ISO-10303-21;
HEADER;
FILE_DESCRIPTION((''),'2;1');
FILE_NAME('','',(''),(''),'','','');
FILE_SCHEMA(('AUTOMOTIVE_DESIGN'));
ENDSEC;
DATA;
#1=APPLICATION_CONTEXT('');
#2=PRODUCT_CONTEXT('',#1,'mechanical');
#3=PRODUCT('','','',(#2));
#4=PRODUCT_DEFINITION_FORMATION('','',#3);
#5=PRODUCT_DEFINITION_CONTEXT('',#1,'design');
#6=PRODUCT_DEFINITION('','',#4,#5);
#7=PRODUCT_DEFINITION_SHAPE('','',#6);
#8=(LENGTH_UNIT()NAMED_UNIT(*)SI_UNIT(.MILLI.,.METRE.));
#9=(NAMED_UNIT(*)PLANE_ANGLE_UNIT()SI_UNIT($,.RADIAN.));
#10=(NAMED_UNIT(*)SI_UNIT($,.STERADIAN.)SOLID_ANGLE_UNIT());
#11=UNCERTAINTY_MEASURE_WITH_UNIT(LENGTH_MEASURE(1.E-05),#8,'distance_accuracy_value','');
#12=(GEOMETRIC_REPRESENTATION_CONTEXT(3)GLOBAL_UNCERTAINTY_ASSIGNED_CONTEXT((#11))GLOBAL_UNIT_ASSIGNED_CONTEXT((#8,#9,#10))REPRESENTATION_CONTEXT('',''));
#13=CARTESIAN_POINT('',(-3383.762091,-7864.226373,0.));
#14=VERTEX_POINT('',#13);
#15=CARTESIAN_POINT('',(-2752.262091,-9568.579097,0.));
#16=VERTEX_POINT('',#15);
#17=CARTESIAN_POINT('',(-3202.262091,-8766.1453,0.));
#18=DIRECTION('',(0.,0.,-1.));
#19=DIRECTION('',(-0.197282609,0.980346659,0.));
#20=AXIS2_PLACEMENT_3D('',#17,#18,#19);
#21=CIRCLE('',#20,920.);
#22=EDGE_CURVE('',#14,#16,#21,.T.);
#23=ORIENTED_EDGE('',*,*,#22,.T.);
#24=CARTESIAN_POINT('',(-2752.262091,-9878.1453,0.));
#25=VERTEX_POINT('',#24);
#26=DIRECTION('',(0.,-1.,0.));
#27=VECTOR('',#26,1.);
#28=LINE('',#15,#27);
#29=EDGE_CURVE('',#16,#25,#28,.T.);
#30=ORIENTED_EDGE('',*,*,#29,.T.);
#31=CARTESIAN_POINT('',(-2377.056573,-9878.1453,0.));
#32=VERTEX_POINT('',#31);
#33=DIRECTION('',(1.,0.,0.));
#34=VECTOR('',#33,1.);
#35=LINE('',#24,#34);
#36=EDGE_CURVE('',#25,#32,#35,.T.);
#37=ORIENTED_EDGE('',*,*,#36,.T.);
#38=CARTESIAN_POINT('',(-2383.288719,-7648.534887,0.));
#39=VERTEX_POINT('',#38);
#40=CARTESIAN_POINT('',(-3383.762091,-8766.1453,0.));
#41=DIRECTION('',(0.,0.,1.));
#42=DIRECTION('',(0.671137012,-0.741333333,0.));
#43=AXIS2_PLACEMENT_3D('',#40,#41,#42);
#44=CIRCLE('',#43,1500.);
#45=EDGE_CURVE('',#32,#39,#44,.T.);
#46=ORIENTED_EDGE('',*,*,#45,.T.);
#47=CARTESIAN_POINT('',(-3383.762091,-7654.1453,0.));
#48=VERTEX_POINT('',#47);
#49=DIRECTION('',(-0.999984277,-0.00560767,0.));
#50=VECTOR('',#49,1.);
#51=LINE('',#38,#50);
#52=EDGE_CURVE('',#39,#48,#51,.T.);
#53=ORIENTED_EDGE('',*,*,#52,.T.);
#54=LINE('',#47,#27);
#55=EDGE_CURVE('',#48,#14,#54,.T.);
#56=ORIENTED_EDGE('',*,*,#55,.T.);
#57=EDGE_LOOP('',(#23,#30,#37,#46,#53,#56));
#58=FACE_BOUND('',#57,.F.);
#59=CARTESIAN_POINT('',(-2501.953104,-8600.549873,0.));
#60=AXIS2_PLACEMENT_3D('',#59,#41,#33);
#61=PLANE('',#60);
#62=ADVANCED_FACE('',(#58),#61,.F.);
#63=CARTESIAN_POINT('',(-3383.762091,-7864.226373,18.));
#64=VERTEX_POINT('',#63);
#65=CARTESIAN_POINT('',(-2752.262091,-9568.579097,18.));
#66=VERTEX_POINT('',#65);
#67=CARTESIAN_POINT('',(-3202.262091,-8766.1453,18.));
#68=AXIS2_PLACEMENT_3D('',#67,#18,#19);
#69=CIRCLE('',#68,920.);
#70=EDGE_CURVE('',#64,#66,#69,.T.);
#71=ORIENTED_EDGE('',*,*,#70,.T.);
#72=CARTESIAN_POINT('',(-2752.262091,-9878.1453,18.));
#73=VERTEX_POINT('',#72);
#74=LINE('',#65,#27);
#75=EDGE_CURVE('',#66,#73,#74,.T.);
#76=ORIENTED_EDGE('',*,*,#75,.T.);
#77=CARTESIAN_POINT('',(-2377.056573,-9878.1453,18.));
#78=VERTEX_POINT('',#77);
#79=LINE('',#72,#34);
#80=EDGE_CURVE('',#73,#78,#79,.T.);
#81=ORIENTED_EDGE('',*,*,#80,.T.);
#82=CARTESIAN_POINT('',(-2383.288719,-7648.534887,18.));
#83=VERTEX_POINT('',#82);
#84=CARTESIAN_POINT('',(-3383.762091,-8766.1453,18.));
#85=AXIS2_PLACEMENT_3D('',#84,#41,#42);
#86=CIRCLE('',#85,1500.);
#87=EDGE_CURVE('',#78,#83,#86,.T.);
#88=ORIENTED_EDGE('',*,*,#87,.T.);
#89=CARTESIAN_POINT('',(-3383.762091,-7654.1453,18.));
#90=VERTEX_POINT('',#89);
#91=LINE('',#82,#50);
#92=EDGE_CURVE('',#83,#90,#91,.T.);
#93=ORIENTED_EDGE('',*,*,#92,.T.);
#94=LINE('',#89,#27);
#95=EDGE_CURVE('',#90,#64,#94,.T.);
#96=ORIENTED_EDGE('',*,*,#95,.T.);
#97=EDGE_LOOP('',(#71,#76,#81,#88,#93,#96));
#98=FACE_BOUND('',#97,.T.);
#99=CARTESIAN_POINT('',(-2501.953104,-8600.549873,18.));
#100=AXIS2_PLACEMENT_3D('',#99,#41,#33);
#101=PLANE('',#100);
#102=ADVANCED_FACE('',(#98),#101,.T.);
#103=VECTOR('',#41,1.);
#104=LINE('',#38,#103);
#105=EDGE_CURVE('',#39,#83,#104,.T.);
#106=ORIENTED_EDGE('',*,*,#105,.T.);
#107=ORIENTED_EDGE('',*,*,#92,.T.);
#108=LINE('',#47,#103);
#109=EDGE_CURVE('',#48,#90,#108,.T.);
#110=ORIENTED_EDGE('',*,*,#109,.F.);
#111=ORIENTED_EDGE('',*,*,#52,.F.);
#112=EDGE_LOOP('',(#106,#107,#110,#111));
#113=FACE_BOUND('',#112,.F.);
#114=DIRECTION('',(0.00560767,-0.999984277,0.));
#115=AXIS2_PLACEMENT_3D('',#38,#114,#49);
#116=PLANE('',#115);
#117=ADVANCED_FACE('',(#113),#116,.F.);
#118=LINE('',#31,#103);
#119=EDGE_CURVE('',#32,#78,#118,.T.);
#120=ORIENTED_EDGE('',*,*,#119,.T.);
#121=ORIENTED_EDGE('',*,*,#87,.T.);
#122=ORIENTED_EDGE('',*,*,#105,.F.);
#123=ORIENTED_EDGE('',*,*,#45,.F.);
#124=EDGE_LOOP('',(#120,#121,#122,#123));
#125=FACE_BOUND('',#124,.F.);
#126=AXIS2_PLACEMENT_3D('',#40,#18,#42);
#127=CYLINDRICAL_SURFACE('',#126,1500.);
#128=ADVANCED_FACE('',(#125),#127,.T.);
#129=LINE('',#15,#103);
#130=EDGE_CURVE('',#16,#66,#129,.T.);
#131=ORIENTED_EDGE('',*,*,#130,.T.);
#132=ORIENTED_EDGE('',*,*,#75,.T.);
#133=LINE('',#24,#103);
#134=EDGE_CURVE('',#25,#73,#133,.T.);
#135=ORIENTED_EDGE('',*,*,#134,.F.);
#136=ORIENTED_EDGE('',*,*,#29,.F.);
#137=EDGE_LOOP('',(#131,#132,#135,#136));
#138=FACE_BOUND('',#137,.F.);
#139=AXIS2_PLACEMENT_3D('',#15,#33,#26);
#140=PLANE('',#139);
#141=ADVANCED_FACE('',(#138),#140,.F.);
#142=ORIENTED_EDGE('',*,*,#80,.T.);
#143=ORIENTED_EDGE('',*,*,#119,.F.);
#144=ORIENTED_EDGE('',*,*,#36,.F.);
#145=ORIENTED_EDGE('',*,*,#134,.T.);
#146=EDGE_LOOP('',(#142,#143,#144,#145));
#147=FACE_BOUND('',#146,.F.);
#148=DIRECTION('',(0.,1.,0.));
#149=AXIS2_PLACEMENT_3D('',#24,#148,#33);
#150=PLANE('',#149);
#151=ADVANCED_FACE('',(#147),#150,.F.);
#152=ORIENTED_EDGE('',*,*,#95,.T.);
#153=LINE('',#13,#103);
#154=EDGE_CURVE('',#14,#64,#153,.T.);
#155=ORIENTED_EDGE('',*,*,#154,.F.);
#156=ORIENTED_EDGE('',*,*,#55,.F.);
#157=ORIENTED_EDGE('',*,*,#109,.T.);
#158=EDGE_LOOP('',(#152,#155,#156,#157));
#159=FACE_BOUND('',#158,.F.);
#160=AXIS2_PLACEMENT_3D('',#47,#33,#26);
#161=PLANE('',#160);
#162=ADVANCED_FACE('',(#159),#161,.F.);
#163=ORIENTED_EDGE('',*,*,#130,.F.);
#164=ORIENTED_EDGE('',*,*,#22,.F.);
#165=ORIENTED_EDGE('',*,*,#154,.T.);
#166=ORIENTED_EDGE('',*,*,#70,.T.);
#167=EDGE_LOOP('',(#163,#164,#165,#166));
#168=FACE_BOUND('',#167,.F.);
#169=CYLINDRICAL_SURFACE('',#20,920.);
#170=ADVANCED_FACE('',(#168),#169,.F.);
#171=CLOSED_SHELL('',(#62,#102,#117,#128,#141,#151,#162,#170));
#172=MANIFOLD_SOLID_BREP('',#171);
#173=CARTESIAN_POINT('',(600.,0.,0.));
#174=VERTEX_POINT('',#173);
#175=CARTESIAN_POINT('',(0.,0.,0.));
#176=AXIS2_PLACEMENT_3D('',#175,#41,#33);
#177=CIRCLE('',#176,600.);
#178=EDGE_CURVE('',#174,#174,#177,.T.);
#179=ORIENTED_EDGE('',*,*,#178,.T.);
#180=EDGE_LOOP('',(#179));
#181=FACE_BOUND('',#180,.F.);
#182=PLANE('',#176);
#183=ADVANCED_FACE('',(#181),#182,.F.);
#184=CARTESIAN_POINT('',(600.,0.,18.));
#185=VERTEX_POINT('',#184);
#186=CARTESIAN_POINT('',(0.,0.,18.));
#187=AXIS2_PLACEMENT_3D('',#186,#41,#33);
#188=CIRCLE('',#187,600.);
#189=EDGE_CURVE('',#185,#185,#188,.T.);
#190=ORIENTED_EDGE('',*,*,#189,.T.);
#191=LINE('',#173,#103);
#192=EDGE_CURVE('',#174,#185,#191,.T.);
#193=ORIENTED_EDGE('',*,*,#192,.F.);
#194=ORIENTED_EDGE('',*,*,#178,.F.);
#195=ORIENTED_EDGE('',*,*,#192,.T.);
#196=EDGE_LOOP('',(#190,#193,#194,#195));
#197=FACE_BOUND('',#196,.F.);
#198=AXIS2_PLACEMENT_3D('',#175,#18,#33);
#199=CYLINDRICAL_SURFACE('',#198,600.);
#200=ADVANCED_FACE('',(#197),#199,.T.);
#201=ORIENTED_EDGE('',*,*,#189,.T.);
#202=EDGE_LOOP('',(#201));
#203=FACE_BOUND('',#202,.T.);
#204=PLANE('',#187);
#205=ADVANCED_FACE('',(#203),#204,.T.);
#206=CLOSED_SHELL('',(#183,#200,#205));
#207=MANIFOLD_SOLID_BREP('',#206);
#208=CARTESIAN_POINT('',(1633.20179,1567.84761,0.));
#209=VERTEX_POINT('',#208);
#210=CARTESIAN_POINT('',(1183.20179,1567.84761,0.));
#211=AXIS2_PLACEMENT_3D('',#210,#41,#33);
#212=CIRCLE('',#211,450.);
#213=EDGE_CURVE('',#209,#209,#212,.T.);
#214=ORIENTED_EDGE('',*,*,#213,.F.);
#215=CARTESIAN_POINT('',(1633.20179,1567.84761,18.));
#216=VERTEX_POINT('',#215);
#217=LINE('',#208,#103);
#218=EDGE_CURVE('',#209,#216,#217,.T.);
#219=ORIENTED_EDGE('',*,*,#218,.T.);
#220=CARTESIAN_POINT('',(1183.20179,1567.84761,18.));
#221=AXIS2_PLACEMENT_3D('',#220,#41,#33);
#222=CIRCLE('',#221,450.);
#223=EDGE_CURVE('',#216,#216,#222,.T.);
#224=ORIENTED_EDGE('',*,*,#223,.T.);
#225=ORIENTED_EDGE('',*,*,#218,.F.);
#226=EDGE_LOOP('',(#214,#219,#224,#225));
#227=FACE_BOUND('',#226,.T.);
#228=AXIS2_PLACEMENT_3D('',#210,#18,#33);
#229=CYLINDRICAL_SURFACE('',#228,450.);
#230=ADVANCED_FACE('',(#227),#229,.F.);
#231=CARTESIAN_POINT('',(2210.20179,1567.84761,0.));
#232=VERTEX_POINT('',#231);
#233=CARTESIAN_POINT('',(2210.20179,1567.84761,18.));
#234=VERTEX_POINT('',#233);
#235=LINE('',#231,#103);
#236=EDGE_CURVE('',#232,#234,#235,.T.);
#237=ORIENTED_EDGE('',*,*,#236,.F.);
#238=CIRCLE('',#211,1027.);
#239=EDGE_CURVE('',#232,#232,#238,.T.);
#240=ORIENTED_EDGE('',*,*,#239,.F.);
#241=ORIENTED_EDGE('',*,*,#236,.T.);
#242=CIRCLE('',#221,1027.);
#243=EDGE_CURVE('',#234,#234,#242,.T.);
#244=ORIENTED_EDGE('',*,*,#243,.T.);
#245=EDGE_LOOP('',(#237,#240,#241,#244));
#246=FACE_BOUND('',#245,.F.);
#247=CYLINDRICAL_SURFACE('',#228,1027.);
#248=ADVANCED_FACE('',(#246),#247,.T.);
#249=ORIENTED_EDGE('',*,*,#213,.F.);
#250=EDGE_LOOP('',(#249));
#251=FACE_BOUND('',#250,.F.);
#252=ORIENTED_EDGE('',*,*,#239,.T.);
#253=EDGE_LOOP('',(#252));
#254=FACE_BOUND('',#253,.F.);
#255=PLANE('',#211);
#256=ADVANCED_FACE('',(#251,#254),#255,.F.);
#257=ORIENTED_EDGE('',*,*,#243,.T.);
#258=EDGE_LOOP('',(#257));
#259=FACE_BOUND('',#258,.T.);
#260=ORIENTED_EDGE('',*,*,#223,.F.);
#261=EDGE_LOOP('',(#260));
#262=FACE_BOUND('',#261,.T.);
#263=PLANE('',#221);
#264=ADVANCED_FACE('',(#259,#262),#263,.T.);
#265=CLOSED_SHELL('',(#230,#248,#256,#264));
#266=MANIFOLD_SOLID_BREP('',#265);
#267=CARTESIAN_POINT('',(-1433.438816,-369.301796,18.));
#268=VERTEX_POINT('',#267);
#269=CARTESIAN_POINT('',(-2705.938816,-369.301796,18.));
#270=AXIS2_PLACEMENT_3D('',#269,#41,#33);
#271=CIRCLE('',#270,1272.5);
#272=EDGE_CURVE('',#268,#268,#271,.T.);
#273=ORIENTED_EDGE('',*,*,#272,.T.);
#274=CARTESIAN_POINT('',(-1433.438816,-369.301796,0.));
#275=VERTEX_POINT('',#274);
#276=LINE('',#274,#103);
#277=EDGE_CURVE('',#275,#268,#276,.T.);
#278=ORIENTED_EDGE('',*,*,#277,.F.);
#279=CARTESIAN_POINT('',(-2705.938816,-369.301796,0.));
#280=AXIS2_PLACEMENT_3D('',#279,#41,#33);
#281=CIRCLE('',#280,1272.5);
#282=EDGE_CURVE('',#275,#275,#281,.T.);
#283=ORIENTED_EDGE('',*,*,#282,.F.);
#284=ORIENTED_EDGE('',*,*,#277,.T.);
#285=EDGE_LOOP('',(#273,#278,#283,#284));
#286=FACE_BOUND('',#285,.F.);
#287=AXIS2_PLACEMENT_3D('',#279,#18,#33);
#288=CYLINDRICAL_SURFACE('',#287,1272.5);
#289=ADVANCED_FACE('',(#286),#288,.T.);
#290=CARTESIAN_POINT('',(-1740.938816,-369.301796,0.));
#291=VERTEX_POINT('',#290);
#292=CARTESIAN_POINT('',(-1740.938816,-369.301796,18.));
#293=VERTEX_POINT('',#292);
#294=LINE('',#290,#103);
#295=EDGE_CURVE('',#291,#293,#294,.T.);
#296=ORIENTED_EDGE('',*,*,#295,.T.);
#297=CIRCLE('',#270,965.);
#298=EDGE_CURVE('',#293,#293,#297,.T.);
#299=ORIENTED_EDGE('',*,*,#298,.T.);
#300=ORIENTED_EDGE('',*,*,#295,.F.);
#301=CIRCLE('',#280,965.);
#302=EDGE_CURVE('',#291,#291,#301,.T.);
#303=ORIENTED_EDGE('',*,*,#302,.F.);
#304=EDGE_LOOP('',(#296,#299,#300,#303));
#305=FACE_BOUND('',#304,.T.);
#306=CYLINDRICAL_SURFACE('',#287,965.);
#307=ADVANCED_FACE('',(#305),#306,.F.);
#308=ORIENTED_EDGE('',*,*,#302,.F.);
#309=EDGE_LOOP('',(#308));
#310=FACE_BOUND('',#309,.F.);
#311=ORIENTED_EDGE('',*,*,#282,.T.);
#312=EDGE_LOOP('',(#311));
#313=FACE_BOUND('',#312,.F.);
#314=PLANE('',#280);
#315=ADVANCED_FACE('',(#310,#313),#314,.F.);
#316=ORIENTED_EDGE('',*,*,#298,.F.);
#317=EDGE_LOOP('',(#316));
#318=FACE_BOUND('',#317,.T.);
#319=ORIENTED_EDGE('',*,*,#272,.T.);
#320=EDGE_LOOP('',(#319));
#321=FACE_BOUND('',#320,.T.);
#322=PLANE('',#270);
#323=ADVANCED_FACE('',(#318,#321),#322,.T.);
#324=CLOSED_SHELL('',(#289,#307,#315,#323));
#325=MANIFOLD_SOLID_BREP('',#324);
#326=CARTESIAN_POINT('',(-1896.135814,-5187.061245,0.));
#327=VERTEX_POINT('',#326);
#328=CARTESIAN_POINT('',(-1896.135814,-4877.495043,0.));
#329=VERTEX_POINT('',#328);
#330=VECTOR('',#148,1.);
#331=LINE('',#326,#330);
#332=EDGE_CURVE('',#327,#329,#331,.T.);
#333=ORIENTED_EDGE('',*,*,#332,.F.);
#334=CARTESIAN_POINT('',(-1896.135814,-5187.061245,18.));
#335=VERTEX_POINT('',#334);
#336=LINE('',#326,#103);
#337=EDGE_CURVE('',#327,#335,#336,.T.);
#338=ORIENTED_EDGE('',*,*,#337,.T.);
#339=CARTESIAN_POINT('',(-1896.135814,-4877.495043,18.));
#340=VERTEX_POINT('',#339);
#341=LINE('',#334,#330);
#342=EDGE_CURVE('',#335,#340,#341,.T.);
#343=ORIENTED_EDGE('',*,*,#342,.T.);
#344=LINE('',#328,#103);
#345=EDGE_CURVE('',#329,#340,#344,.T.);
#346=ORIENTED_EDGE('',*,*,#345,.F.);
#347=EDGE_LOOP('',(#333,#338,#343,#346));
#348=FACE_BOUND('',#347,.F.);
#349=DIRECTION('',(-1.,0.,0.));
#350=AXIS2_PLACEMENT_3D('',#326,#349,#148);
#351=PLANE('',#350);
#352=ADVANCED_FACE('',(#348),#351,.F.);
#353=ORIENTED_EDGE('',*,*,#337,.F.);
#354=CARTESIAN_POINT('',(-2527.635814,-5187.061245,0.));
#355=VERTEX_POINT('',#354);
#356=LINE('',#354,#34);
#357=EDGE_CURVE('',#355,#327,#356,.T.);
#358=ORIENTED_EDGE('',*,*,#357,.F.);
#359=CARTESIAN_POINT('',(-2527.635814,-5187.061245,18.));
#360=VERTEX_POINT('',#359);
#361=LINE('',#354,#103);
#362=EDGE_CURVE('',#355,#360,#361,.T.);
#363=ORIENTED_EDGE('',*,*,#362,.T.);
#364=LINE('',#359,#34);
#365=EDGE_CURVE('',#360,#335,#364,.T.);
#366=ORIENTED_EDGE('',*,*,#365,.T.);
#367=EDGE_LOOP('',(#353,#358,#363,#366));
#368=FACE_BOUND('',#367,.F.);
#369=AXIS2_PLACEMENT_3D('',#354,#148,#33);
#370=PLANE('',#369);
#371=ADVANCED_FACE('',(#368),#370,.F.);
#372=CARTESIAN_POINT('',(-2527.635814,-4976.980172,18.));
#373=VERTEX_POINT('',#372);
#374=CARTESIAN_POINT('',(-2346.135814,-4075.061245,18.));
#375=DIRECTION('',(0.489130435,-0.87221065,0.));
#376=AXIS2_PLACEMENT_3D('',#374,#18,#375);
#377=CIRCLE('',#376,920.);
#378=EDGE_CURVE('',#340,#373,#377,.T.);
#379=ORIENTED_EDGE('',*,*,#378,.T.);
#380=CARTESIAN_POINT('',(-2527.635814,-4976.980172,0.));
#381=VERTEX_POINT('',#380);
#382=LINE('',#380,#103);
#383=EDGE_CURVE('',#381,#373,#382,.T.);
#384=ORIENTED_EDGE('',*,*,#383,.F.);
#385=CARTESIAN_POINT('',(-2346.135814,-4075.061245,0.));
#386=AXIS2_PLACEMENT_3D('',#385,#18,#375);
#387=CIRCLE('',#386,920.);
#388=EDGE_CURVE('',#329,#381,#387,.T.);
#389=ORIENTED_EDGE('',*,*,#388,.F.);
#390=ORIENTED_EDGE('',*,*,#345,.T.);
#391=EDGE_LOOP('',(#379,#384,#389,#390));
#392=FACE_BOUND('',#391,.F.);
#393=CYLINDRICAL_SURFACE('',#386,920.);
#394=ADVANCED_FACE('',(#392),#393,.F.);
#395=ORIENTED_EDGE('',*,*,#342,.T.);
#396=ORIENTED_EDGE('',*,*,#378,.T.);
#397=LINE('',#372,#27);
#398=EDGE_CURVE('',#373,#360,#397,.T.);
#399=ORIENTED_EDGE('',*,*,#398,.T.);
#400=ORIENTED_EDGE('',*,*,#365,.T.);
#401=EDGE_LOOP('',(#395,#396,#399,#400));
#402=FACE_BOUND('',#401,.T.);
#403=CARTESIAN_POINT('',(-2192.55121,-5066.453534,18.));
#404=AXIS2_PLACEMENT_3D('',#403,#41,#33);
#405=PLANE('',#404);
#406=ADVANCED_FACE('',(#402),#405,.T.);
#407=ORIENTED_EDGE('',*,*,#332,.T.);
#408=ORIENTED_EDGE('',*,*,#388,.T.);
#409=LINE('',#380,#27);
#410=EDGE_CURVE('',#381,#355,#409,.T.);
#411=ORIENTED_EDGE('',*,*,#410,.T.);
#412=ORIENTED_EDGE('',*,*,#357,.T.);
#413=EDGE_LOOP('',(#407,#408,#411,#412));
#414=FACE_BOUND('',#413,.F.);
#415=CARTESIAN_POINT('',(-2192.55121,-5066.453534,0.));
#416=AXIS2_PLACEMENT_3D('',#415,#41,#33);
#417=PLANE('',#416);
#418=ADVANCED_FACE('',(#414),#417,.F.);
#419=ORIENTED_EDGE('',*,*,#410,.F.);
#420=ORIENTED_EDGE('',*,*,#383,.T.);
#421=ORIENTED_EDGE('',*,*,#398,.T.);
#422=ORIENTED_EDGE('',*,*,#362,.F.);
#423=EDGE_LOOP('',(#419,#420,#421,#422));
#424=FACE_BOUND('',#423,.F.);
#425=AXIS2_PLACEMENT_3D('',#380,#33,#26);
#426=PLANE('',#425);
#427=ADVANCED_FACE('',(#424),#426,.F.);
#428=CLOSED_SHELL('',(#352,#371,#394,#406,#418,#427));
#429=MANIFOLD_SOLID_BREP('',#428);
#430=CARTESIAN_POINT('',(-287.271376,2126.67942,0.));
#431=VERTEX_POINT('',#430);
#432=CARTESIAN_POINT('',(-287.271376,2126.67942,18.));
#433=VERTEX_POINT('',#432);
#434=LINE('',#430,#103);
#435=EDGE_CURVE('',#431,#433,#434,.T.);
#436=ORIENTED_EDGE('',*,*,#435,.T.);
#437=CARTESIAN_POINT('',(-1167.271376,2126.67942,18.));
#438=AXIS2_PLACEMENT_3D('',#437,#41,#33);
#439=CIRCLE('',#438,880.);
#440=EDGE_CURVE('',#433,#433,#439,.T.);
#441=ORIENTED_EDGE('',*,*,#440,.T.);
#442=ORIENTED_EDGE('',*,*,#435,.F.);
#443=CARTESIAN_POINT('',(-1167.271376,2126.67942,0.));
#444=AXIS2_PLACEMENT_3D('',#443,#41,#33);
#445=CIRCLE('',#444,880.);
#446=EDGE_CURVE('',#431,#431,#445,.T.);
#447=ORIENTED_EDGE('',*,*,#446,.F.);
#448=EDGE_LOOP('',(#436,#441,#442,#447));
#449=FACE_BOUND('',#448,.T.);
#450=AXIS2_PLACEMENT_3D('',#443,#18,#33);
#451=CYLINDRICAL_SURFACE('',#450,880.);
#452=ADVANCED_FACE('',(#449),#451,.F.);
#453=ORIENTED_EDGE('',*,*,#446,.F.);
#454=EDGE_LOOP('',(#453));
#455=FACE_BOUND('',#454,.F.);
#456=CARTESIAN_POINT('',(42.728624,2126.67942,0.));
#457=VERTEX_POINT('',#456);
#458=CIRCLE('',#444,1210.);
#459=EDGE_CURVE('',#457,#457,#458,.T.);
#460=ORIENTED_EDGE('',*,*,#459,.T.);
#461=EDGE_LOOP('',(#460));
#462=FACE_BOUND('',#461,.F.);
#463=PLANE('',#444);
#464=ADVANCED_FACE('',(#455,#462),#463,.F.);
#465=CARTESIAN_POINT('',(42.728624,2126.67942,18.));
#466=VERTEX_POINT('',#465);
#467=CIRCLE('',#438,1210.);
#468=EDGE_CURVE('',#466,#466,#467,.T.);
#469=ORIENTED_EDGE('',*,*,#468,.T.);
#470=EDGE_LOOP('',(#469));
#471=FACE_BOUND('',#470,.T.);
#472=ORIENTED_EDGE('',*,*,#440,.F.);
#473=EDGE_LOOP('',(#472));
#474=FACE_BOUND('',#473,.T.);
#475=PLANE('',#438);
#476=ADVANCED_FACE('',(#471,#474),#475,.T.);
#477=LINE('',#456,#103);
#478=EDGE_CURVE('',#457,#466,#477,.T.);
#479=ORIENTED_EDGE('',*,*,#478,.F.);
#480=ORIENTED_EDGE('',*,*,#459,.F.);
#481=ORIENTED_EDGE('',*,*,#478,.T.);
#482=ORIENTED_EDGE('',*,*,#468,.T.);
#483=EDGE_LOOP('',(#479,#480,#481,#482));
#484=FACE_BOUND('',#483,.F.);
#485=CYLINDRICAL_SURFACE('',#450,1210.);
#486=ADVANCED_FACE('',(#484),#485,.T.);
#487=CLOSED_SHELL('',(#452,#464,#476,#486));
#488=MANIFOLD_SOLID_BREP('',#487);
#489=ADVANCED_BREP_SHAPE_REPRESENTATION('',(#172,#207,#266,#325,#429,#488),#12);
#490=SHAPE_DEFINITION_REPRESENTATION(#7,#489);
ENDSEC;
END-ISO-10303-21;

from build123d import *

# Parameters (mm, degrees)
F0_R      = 600
F1_DEPTH  = 18
F2_R      = 1027
F2_R_2    = 450
F3_DEPTH  = 18
F4_R      = 1210
F4_R_2    = 880
F5_DEPTH  = 18
F6_R      = 1272.5
F6_R_2    = 965
F7_DEPTH  = 18
F9_DEPTH  = 18
F11_DEPTH = 18


with BuildPart() as f1:
    # F0 (on Top) → F1 (new body)
    with BuildSketch(Plane.XY):
        Circle(F0_R)
    extrude(amount=F1_DEPTH)


with BuildPart() as f3:
    # F2 (on Top) → F3 (new body)
    with BuildSketch(Plane.XY):
        with Locations((1183.201789856, 1567.84760952)):
            Circle(F2_R)
        with Locations((1183.201789856, 1567.84760952)):
            Circle(F2_R_2, mode=Mode.SUBTRACT)
    extrude(amount=F3_DEPTH)


with BuildPart() as f5:
    # F4 (on Top) → F5 (new body)
    with BuildSketch(Plane.XY):
        with Locations((-1167.2713756561, 2126.6794204712)):
            Circle(F4_R)
        with Locations((-1167.2713756561, 2126.6794204712)):
            Circle(F4_R_2, mode=Mode.SUBTRACT)
    extrude(amount=F5_DEPTH)


with BuildPart() as f7:
    # F6 (on Top) → F7 (new body)
    with BuildSketch(Plane.XY):
        with Locations((-2705.9388160706, -369.3017959595)):
            Circle(F6_R)
        with Locations((-2705.9388160706, -369.3017959595)):
            Circle(F6_R_2, mode=Mode.SUBTRACT)
    extrude(amount=F7_DEPTH)


with BuildPart() as f9:
    # F8 (on Top) → F9 (new body)
    with BuildSketch(Plane.XY):
        with BuildLine():
            ThreePointArc((-1896.1358144379, -4877.4950429265), (-2202.9667353597, -4983.8530885251), (-2527.6358144379, -4976.9801715458))
            Line((-2527.6358144379, -4976.9801715458), (-2527.6358144379, -5187.0612450341))
            Line((-2527.6358144379, -5187.0612450341), (-1896.1358144379, -5187.0612450341))
            Line((-1896.1358144379, -5187.0612450341), (-1896.1358144379, -4877.4950429265))
        make_face()
    extrude(amount=F9_DEPTH)


with BuildPart() as f11:
    # F10 (on face) → F11 (new body)
    with BuildSketch(Plane.XY):
        with BuildLine():
            ThreePointArc((-3383.762090595, -7864.2263730014), (-2339.5758122783, -8446.5011454854), (-2752.262090595, -9568.5790974055))
            Line((-2752.262090595, -9568.5790974055), (-2752.262090595, -9878.1452995131))
            Line((-2752.262090595, -9878.1452995131), (-2498.4145172777, -9878.1452995131))
            Line((-2498.4145172777, -9878.1452995131), (-2377.0565725809, -9878.1452995131))
            ThreePointArc((-2377.0565725809, -9878.1452995131), (-1883.7679503047, -8761.952556401), (-2383.2887193923, -7648.5348872878))
            Line((-2383.2887193923, -7648.5348872878), (-3383.762090595, -7654.1452995131))
            Line((-3383.762090595, -7654.1452995131), (-3383.762090595, -7864.2263730014))
        make_face()
    extrude(amount=F11_DEPTH)


solid = Compound([f1.part, f3.part, f5.part, f7.part, f9.part, f11.part])
